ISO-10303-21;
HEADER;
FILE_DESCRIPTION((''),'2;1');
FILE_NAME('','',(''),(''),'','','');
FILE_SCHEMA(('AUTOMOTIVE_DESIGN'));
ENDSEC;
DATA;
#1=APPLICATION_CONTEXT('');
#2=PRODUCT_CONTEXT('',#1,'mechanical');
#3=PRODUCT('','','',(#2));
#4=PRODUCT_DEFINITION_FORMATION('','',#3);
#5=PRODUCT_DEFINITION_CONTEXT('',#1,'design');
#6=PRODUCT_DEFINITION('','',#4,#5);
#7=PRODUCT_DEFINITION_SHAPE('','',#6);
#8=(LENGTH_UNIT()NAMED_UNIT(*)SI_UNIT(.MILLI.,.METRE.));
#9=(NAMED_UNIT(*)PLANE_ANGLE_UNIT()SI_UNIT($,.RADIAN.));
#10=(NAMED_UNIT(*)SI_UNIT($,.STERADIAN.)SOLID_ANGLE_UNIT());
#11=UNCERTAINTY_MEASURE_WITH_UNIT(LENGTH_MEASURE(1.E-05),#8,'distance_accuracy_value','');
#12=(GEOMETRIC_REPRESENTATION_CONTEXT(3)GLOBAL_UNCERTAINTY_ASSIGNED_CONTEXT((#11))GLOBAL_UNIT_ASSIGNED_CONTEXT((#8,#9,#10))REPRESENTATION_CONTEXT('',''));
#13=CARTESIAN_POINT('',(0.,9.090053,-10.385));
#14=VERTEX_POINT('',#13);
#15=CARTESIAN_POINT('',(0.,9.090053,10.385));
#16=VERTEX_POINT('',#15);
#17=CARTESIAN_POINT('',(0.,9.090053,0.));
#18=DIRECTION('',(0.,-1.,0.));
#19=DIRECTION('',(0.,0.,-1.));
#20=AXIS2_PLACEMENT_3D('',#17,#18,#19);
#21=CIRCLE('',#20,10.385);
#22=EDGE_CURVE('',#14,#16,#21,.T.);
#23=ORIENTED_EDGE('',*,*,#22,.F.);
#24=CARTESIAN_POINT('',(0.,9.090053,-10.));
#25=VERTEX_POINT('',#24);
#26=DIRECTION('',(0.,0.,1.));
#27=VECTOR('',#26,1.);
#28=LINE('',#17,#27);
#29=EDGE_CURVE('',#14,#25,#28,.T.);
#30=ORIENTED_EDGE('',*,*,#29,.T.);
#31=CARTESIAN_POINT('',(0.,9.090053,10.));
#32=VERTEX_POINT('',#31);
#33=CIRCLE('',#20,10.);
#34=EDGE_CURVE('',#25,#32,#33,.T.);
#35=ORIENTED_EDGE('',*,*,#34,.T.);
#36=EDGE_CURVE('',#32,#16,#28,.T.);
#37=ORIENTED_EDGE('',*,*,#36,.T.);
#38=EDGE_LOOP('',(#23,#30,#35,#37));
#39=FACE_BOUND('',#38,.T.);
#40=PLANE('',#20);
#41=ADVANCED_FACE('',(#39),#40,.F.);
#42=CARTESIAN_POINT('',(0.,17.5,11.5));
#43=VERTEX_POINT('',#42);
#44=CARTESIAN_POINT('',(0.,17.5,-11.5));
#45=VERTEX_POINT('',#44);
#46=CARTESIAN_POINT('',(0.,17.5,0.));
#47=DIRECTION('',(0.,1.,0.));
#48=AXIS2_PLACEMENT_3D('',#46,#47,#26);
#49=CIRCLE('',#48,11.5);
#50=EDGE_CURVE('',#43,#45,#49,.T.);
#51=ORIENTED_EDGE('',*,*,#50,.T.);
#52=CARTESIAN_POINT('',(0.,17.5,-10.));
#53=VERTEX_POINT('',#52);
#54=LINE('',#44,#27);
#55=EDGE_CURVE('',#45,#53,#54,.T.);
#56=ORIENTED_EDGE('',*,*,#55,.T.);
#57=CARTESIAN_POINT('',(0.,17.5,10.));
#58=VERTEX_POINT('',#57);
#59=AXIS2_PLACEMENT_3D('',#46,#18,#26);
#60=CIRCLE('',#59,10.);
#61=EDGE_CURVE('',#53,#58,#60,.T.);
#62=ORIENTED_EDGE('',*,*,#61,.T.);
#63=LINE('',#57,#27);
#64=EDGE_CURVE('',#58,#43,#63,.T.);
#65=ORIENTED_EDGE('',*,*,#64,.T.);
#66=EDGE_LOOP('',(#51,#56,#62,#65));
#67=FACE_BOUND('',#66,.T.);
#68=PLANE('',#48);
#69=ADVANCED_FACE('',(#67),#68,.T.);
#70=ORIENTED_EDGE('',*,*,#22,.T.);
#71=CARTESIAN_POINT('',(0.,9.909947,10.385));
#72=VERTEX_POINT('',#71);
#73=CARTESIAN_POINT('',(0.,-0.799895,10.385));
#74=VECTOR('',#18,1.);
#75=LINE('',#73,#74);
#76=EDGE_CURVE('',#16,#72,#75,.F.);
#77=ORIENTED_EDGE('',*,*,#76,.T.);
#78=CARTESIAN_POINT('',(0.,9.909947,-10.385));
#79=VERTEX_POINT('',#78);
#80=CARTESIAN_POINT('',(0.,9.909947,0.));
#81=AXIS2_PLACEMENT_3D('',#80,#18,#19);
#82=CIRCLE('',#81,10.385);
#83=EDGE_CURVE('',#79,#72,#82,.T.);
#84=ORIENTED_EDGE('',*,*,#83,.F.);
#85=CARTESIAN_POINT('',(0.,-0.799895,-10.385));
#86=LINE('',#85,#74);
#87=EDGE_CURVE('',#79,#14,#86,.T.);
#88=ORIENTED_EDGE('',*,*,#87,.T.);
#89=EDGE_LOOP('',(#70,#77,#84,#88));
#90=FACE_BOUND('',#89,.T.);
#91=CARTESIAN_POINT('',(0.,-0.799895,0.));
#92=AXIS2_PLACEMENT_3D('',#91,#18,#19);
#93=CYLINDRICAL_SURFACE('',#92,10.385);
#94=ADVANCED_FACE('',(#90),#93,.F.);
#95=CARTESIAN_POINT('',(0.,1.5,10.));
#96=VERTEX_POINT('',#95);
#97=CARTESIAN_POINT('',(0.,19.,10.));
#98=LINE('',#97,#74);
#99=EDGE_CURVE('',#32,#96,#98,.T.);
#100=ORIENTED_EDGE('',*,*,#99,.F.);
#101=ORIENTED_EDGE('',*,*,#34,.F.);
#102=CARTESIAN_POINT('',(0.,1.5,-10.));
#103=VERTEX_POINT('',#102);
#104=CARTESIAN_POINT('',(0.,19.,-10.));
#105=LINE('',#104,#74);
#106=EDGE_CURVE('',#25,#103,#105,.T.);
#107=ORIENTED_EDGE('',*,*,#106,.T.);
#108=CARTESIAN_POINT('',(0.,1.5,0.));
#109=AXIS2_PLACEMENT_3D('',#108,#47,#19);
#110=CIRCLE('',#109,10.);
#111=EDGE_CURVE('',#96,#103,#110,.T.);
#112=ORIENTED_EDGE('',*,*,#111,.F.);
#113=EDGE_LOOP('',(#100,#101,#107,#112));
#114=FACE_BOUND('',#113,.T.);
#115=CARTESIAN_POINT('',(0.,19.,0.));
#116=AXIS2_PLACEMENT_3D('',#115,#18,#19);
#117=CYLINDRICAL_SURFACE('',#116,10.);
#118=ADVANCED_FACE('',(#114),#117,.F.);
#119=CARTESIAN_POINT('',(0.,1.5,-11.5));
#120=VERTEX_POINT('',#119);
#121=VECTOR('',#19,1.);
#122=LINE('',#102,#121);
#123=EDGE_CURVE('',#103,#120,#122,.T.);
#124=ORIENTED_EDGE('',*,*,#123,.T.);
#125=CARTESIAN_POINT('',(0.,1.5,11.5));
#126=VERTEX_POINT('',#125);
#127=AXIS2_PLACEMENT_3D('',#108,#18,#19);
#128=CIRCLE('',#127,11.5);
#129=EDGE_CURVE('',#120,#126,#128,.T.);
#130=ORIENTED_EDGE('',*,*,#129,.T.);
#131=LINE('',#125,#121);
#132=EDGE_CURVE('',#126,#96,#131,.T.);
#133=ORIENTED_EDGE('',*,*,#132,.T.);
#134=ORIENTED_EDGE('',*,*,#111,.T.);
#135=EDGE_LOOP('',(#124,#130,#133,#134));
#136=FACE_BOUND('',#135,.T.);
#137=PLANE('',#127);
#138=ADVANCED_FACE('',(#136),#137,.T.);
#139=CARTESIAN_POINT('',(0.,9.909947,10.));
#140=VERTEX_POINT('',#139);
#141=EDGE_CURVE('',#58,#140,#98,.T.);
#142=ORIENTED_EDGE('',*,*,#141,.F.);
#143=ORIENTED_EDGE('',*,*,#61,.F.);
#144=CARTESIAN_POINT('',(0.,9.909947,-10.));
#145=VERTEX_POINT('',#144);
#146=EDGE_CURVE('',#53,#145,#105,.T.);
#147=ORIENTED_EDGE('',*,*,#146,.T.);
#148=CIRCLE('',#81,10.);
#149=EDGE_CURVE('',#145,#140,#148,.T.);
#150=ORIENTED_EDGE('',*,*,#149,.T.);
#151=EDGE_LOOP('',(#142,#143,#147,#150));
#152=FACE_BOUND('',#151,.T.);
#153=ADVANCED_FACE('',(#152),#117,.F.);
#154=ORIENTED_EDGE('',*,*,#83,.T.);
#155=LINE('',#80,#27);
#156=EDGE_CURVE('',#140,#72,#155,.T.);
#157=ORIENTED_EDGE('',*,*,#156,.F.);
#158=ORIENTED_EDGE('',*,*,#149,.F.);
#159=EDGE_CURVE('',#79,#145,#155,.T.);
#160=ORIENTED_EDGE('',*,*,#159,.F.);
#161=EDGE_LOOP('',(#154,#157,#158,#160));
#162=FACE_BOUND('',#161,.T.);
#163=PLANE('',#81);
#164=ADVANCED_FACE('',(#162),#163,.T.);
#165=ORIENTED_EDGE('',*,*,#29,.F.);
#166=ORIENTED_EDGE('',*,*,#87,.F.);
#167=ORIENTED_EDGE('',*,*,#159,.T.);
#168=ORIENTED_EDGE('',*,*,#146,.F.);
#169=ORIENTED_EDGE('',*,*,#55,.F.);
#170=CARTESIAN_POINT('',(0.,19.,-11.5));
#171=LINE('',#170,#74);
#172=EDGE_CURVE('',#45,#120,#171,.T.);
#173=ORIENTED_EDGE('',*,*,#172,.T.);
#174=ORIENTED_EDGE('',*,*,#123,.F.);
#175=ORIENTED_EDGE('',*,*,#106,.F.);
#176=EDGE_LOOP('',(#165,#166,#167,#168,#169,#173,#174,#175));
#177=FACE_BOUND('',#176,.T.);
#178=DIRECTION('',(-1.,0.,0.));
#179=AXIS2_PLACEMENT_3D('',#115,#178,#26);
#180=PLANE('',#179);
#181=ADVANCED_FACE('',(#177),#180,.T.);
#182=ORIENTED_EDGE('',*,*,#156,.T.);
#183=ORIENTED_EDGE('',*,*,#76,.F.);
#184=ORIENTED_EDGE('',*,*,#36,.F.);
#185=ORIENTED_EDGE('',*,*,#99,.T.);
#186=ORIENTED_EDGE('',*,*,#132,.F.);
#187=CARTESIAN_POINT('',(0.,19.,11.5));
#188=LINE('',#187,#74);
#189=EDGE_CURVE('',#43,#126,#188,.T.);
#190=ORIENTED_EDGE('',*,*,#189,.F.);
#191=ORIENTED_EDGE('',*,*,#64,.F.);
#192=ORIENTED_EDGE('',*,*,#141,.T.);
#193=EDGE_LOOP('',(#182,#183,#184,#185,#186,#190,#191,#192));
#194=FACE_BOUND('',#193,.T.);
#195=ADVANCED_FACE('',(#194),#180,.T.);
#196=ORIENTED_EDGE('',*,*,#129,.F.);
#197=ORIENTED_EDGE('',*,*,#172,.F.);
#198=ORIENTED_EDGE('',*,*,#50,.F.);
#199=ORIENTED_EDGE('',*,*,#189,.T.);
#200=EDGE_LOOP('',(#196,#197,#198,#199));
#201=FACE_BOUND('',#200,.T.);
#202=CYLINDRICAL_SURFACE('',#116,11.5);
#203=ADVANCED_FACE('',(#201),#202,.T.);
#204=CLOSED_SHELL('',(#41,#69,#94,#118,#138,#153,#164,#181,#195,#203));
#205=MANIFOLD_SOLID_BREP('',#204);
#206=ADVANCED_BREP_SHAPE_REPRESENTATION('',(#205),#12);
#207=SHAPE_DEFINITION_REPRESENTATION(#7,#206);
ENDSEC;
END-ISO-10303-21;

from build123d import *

# Parameters (mm, degrees)
BOSS_EXTRUDE1_DEPTH       = 19
CUT_REVOLVE_THIN4_START   = 9.090052714
CUT_REVOLVE_THIN4_DEPTH   = 0.819894572
CUT_REVOLVE_THIN4_START_2 = 9.100052714
CUT_REVOLVE_THIN4_2_DEPTH = 0.799894572
CUT_EXTRUDE1_DEPTH        = 1.5
CUT_EXTRUDE2_START        = -1.5
CUT_EXTRUDE2_DEPTH        = 1.5


with BuildPart() as part:
    # Sketch1 → Boss-Extrude1 (new body)
    with BuildSketch(Plane(origin=(0, 0, 0), x_dir=(1, 0, 0), z_dir=(0, 1, 0))):
        with BuildLine():
            Line((0, -10), (0, -11.5))
            ThreePointArc((0, -11.5), (8.131727984, -8.131727984), (11.5, 0))
            ThreePointArc((11.5, 0), (8.131727984, 8.131727984), (0, 11.5))
            Line((0, 11.5), (0, 10))
            ThreePointArc((0, 10), (7.071067812, 7.071067812), (10, 0))
            ThreePointArc((10, 0), (7.071067812, -7.071067812), (0, -10))
        make_face()
    extrude(amount=BOSS_EXTRUDE1_DEPTH)

    # Cut-Revolve-Thin4: read off the stored shape, not the designer's step
    # Cut-Revolve-Thin4 outline → Cut-Revolve-Thin4 (cut)
    with BuildSketch(Plane(origin=(0, 0, 0), x_dir=(1, 0, 0), z_dir=(0, 1, 0)).offset(CUT_REVOLVE_THIN4_START)):
        with BuildLine():
            ThreePointArc((0, -10.385), (10.385, 0), (0, 10.385))
            Line((0, 10.385), (0, 10))
            ThreePointArc((0, 10), (10, 0), (0, -10))
            Line((0, -10), (0, -10.385))
        make_face()
    extrude(amount=CUT_REVOLVE_THIN4_DEPTH, mode=Mode.SUBTRACT)

    # Sketch3 → Cut-Extrude1 (cut)
    with BuildSketch(Plane.XZ):
        with BuildLine():
            Line((0, 11.5), (0, 10))
            ThreePointArc((0, 10), (10, 0), (0, -10))
            Line((0, -10), (0, -11.5))
            ThreePointArc((0, -11.5), (11.5, 0), (0, 11.5))
        make_face()
    extrude(amount=-CUT_EXTRUDE1_DEPTH, mode=Mode.SUBTRACT)

    # Sketch4 → Cut-Extrude2 (cut)
    with BuildSketch(Plane(origin=(0, 19, 0), x_dir=(1, 0, 0), z_dir=(0, 1, 0)).offset(CUT_EXTRUDE2_START)):
        with BuildLine():
            Line((0, -10), (0, -11.5))
            ThreePointArc((0, -11.5), (11.5, 0), (0, 11.5))
            Line((0, 11.5), (0, 10))
            ThreePointArc((0, 10), (10, 0), (0, -10))
        make_face()
    extrude(amount=CUT_EXTRUDE2_DEPTH, mode=Mode.SUBTRACT)


with BuildPart() as body_2:
    # Cut-Revolve-Thin4 2 outline → Cut-Revolve-Thin4 2 (new body)
    with BuildSketch(Plane(origin=(0, 0, 0), x_dir=(1, 0, 0), z_dir=(0, 1, 0)).offset(CUT_REVOLVE_THIN4_START_2)):
        with BuildLine():
            Line((0, 10.375), (0, 10))
            ThreePointArc((0, 10), (10, 0), (0, -10))
            Line((0, -10), (0, -10.375))
            ThreePointArc((0, -10.375), (10.375, 0), (0, 10.375))
        make_face()
    extrude(amount=CUT_REVOLVE_THIN4_2_DEPTH)


solid = part.part
